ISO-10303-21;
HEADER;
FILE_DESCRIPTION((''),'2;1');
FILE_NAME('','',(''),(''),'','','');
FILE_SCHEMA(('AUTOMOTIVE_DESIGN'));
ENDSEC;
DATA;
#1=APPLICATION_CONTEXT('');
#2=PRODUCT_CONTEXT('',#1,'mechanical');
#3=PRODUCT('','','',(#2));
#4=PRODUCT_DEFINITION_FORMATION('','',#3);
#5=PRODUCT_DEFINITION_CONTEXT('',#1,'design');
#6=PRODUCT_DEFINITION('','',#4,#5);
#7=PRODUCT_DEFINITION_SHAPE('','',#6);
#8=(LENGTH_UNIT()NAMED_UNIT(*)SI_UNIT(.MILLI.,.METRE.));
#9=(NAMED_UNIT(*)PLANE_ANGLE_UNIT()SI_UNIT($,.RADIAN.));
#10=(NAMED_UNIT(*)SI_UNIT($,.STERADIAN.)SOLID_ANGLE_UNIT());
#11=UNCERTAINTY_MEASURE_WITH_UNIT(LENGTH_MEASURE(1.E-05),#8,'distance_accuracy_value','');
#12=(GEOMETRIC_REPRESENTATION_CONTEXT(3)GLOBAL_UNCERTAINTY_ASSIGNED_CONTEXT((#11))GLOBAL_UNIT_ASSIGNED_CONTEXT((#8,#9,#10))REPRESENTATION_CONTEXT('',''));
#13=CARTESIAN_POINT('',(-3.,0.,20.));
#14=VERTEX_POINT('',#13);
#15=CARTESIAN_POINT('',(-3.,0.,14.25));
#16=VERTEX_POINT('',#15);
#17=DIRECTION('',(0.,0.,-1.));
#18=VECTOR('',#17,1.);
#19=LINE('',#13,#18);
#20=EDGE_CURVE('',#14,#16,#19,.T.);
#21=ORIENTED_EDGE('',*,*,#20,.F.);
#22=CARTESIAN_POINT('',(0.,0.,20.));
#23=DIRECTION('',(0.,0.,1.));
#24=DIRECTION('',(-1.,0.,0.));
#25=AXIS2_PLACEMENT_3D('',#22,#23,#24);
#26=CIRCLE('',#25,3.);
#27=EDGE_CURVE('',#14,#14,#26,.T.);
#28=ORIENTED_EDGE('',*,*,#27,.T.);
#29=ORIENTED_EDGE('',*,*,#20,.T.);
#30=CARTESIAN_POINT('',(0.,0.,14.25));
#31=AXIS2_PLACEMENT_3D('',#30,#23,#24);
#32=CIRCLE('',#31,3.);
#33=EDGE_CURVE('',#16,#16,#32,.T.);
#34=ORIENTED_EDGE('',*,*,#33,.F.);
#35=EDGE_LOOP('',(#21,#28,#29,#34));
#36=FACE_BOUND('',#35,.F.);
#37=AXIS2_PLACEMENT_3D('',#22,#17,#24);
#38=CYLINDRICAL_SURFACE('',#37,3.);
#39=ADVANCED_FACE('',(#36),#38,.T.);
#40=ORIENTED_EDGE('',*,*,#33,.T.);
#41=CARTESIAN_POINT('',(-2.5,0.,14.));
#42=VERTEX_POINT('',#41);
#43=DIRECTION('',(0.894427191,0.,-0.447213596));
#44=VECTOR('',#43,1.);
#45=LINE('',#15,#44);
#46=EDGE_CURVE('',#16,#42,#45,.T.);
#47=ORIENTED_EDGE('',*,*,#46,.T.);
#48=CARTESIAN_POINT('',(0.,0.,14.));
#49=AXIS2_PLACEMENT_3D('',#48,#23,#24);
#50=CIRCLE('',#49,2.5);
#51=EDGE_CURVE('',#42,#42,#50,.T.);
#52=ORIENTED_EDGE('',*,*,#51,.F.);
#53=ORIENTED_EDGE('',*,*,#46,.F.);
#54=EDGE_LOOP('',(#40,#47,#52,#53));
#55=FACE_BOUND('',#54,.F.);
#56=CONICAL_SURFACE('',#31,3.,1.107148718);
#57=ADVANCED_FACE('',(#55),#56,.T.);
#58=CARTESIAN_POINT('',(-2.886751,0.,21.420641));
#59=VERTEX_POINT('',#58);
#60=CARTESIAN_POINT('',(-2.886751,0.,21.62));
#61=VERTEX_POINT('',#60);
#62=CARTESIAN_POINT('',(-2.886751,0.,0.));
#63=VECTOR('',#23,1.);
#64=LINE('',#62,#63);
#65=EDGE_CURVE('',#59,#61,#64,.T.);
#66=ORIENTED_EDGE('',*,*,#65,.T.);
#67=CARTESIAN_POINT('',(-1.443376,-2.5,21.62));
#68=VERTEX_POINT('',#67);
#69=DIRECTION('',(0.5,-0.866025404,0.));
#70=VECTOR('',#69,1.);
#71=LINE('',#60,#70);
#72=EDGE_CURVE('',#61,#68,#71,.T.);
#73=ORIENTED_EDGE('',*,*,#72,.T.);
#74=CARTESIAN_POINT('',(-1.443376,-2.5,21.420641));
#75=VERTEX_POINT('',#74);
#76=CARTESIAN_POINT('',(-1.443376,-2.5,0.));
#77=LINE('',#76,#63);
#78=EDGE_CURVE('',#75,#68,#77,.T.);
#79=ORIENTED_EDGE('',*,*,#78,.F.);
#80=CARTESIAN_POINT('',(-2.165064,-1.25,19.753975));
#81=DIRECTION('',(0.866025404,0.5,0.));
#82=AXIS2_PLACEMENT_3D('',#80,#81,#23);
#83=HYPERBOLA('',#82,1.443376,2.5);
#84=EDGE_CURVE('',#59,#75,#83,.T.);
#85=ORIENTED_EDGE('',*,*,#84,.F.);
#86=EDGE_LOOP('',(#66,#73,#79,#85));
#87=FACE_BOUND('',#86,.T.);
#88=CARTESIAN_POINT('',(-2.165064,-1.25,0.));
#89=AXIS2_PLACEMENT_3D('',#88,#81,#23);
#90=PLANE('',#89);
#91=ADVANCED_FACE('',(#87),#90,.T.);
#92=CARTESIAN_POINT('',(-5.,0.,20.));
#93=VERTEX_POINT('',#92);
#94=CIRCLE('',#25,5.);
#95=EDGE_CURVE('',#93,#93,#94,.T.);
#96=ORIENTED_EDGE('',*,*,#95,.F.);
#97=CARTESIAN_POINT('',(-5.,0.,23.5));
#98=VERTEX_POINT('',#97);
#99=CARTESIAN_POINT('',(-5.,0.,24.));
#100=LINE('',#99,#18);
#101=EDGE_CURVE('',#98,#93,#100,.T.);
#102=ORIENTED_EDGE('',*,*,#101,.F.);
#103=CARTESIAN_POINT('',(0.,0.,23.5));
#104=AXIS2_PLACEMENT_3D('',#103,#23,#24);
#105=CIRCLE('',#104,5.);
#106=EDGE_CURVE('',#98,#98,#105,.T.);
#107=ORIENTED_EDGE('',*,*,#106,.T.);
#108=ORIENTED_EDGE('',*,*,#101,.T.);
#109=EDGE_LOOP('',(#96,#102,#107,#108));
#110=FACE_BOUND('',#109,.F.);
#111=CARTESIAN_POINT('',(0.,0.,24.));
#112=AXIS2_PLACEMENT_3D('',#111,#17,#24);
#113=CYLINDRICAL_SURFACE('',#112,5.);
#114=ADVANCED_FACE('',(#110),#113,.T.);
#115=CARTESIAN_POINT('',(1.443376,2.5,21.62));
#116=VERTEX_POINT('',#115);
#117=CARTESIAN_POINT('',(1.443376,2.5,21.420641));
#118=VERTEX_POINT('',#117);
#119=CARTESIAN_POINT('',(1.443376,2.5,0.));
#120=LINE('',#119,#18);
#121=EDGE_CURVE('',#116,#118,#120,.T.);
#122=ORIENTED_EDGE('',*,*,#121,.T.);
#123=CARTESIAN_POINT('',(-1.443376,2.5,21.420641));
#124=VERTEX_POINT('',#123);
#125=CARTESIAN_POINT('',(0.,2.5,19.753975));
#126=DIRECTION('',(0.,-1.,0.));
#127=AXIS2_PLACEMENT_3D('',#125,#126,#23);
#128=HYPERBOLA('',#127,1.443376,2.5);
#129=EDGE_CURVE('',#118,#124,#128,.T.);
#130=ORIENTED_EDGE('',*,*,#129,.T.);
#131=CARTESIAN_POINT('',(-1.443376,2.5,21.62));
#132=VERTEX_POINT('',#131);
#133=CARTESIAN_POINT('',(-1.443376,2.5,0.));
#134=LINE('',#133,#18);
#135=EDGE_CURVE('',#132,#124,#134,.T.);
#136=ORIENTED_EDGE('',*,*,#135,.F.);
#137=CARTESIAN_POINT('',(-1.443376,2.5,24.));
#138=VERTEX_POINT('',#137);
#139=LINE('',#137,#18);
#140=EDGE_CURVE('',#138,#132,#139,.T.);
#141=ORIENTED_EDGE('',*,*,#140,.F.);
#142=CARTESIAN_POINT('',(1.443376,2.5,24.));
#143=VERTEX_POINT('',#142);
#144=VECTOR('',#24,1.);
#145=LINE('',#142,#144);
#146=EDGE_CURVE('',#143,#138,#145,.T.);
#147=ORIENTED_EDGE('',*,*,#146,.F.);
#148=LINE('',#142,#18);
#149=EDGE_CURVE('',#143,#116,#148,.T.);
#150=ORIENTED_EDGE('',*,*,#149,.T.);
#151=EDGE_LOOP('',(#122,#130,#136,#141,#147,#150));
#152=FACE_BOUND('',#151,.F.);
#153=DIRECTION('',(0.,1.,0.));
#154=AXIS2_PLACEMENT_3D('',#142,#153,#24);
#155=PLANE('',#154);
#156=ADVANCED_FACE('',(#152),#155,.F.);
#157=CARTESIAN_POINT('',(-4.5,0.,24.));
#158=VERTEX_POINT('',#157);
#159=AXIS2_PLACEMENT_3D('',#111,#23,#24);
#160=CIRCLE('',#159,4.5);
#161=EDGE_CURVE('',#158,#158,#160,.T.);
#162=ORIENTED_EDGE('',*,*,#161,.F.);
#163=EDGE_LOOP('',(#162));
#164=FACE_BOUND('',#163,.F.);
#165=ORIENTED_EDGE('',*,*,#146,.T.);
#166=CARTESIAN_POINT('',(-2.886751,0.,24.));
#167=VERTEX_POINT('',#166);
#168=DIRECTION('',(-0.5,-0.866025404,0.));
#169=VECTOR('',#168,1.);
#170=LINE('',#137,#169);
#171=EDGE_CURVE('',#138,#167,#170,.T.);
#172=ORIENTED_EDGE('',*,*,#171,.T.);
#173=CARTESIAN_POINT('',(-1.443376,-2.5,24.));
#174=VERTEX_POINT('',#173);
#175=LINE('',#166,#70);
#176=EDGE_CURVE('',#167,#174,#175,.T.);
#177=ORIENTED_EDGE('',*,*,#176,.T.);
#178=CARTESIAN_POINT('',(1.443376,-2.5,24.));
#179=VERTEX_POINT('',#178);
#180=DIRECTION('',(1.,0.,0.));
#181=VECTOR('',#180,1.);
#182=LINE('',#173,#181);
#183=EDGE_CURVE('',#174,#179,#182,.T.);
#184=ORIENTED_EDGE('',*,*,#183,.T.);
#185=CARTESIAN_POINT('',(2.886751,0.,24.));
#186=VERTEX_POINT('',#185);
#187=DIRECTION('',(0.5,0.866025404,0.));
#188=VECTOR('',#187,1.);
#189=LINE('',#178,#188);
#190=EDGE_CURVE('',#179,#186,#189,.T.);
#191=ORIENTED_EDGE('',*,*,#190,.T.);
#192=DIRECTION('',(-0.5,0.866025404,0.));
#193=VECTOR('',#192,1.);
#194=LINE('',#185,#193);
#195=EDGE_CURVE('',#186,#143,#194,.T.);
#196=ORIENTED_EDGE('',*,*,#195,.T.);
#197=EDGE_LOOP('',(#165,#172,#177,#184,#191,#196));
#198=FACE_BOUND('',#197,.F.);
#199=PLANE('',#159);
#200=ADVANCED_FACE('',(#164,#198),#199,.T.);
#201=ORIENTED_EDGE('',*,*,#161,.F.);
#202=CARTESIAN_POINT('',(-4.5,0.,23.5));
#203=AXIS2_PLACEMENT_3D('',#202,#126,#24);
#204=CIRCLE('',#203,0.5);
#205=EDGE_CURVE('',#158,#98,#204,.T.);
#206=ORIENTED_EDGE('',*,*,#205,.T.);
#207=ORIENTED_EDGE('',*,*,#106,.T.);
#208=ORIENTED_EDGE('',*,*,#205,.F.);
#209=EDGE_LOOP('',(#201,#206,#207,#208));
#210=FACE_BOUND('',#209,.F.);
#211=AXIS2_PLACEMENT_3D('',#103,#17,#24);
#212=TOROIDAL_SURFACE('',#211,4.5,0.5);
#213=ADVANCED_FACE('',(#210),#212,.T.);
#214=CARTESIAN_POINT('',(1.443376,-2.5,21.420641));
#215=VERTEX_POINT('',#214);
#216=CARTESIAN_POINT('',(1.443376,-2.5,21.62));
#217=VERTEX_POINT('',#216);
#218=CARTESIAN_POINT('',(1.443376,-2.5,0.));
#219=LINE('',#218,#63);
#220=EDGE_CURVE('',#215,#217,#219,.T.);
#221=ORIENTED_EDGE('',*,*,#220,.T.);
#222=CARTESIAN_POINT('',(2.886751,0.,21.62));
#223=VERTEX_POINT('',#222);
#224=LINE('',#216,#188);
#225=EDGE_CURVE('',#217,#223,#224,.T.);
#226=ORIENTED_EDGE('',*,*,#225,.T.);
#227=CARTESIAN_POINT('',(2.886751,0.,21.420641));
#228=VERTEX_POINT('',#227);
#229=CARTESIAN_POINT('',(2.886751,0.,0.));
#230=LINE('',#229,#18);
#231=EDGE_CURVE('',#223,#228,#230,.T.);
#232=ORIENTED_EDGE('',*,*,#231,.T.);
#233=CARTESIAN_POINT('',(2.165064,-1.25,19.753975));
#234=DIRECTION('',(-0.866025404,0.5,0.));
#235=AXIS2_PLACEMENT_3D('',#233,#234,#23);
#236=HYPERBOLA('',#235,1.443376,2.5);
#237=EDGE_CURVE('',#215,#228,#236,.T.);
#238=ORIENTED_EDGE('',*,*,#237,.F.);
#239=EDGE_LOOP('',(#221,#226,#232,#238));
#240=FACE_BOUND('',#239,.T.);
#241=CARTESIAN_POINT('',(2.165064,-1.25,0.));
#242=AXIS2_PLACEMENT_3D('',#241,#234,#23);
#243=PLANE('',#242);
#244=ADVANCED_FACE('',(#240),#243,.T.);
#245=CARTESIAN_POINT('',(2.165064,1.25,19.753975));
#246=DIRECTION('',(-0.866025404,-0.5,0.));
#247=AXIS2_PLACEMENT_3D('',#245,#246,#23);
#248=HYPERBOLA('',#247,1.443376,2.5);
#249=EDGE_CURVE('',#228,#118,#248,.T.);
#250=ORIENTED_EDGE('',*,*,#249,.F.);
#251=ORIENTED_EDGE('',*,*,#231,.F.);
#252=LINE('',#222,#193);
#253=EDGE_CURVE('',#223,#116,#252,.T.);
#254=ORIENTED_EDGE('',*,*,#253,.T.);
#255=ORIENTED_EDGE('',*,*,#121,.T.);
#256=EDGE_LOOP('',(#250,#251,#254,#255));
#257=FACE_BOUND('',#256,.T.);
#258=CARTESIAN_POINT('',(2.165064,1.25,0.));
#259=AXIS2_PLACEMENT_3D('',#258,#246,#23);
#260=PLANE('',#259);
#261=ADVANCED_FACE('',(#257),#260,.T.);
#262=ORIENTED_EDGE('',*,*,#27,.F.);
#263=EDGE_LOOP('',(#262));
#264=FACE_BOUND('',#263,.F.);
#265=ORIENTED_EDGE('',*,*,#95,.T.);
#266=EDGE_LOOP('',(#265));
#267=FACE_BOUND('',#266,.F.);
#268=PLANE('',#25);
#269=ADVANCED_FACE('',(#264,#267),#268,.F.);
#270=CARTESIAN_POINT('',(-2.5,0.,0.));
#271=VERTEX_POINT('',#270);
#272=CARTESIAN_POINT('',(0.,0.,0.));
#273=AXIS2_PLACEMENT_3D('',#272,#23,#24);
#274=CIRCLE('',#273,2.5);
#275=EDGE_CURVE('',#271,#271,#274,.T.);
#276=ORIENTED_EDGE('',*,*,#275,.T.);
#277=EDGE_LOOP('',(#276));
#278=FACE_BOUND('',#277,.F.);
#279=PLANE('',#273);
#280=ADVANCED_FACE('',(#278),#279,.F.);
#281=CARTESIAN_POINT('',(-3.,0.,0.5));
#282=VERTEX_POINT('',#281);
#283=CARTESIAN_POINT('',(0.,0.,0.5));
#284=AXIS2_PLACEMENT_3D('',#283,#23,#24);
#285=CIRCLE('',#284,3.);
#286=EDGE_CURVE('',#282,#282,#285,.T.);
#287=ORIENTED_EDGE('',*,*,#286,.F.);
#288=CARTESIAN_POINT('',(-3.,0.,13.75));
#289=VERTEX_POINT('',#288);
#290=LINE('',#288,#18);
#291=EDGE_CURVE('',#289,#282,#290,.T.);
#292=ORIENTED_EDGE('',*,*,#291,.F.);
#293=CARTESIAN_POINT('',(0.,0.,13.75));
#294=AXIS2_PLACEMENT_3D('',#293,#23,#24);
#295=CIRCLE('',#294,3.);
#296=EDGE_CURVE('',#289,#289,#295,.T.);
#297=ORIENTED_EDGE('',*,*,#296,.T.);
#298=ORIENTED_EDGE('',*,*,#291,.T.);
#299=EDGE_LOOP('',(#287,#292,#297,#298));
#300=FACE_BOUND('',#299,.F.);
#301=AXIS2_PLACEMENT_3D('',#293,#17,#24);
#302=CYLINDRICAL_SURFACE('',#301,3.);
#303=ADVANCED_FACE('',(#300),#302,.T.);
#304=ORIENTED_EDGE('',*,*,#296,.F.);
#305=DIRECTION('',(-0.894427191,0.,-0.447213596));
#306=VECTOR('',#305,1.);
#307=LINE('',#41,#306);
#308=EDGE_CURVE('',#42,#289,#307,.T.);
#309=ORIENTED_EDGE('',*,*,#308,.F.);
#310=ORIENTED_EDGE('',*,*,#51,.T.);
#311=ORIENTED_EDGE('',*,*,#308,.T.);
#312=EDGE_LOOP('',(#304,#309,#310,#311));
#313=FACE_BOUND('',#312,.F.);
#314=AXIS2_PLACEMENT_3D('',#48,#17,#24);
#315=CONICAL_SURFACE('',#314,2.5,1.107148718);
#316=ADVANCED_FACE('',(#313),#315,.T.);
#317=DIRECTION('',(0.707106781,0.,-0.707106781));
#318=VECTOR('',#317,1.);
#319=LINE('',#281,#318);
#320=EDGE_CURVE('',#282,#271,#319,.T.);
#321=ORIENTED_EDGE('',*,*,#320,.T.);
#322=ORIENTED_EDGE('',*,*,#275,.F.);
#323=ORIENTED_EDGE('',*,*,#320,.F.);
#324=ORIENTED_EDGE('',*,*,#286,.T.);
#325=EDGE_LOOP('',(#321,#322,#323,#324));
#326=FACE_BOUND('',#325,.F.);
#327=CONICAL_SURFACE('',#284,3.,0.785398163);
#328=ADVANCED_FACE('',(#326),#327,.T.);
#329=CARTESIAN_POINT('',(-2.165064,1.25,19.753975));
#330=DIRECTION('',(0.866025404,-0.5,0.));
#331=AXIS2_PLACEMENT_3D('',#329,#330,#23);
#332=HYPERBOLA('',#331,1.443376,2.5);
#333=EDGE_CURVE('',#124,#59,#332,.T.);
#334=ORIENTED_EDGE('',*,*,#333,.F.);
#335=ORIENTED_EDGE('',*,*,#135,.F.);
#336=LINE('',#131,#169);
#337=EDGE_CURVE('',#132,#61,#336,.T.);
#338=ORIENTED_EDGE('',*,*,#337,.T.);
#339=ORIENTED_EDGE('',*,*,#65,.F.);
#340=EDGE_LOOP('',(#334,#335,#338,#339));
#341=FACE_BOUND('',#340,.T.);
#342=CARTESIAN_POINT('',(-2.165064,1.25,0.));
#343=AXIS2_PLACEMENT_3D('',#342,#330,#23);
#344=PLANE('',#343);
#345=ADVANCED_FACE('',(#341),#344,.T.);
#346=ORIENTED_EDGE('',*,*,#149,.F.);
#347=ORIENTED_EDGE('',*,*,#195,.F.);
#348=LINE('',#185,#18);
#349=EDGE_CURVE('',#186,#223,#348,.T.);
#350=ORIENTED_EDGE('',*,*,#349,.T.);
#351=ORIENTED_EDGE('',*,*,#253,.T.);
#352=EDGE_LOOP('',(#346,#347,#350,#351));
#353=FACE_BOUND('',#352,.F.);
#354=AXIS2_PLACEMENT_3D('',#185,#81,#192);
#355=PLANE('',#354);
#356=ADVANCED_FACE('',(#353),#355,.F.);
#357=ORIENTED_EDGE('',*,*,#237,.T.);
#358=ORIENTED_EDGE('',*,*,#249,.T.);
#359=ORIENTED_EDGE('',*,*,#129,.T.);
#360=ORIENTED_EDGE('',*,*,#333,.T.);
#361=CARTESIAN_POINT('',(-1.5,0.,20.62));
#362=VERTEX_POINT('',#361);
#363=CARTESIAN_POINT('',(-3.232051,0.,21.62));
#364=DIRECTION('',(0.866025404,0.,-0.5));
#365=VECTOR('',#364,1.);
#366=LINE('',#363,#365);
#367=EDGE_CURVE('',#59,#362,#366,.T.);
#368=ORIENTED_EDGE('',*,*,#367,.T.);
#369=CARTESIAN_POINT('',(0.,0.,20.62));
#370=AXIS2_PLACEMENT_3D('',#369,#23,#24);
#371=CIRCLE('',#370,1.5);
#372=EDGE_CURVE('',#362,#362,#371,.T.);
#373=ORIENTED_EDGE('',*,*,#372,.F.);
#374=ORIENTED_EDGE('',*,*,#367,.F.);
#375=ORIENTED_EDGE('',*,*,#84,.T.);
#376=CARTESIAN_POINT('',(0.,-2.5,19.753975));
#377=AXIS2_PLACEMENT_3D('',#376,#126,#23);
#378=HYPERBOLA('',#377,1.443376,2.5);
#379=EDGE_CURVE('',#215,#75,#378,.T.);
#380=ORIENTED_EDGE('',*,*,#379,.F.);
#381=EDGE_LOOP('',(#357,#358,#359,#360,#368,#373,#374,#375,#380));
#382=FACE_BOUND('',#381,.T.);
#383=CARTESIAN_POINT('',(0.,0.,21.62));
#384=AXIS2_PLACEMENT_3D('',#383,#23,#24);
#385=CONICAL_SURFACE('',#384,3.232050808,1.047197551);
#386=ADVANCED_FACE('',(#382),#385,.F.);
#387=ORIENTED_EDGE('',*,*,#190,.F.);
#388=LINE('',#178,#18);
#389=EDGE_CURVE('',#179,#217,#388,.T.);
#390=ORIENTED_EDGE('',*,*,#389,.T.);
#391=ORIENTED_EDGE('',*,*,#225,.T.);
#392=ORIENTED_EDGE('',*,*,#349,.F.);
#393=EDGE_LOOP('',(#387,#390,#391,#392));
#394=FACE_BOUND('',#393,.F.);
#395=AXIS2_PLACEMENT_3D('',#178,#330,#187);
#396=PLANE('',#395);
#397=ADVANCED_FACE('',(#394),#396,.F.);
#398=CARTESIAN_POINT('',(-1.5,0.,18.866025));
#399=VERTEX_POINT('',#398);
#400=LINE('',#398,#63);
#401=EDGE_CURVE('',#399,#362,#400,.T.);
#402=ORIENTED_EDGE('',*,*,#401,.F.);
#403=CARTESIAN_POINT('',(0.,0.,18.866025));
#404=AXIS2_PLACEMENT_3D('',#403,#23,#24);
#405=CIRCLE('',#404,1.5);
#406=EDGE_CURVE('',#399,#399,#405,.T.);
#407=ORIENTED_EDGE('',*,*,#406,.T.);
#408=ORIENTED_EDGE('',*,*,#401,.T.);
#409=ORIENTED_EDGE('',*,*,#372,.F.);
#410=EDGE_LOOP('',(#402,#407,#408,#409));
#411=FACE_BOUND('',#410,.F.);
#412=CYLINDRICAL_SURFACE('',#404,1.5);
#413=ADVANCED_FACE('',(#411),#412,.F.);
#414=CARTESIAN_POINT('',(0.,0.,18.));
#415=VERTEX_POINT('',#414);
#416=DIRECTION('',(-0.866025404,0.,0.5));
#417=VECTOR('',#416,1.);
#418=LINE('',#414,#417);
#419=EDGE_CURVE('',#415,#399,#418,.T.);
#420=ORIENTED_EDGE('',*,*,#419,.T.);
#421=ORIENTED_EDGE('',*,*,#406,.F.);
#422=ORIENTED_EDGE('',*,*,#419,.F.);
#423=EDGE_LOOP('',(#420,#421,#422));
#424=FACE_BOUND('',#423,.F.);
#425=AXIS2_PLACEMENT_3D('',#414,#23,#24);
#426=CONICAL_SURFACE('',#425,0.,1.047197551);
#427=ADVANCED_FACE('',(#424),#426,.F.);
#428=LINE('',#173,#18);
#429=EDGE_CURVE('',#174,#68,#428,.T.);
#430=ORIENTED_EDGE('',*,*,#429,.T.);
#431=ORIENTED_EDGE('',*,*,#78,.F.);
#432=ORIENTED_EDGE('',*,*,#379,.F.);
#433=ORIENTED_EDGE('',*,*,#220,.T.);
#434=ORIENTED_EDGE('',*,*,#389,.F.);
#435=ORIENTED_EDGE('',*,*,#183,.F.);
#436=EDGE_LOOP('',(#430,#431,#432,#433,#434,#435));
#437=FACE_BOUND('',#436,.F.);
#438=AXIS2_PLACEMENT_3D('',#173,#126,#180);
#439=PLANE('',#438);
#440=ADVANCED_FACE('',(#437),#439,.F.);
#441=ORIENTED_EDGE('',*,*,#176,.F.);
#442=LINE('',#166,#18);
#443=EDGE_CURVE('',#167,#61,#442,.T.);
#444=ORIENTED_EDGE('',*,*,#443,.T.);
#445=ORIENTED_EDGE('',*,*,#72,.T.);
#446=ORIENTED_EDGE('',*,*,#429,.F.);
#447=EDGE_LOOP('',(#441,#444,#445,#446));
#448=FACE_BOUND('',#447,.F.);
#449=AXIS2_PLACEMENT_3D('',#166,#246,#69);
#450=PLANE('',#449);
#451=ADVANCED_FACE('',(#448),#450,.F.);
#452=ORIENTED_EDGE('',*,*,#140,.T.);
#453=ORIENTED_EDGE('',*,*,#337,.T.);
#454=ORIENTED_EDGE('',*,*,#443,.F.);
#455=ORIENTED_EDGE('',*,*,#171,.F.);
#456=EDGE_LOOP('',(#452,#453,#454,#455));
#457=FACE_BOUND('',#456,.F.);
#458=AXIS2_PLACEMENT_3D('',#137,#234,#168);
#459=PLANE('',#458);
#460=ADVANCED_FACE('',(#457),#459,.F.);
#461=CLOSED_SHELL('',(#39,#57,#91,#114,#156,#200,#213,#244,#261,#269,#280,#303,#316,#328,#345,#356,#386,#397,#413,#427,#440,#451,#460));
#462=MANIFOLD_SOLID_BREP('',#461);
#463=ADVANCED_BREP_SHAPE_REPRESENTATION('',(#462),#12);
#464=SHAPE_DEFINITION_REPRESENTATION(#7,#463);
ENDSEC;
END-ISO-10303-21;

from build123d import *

# Parameters (mm, degrees)
F2_R     = 0.5
F3_SIZE  = 0.5
F5_DEPTH = 2.38


# Not quite as in the source:
# - a fillet or chamfer that OpenCascade refuses, or shapes differently, is made with other operations: its cross-section is extruded or revolved along the edge and cut away or added


with BuildPart() as f1:
    # F0 (on Front) → F1 (revolve)
    with BuildSketch(Plane.XZ):
        Polygon((-3, 0), (0, 0), (0, 18), (-1.5, 18.8660254038), (-1.5, 24), (-5, 24), (-5, 20), (-3, 20), (-3, 14.25), (-2.5, 14), (-3, 13.75), align=None)
    revolve(axis=Axis((0, 0, 18.332445994), (0, 0, 1)))

    # F2
    f2_edges = [f1.edges().sort_by_distance(p)[0] for p in [
        (5, 0, 24),
    ]]
    fillet(f2_edges, radius=F2_R)

    # F3
    f3_edges = [f1.edges().sort_by_distance(p)[0] for p in [
        (3, 0, 0),
    ]]
    chamfer(f3_edges, length=F3_SIZE)

    # F4 (on face) → F5 (cut)
    with BuildSketch(Plane.XY.offset(24)):
        Polygon((-1.443375673, -2.5), (1.443375673, -2.5), (2.8867513459, 0), (1.443375673, 2.5), (-1.443375673, 2.5), (-2.8867513459, 0), align=None)
    extrude(amount=-F5_DEPTH, mode=Mode.SUBTRACT)

    # F6: chamfer of 1 x 1.7320508076 on 1 edges, made by hand


with BuildPart() as f6_tool2:
    # F6_s3 → F6_t4 (revolve)
    with BuildSketch(Plane.XZ):
        Polygon((-3.2320508076, 21.62), (-1.5, 20.62), (-1.5, 21.62), align=None)
    revolve(axis=Axis((0, 0, 21.62), (0, 0, 1)))

    split(bisect_by=Plane(origin=(-2.1650635095, 1.25, 0), x_dir=(0, 0, 1), z_dir=(0.8660254038, -0.5, 0)), keep=Keep.TOP)

    split(bisect_by=Plane.XZ.offset(-2.5), keep=Keep.TOP)

    split(bisect_by=Plane(origin=(2.1650635095, 1.25, 0), x_dir=(0, 0, 1), z_dir=(-0.8660254038, -0.5, 0)), keep=Keep.TOP)

    split(bisect_by=Plane(origin=(2.1650635095, -1.25, 0), x_dir=(0, 0, 1), z_dir=(-0.8660254038, 0.5, 0)), keep=Keep.TOP)

    split(bisect_by=Plane.XZ.offset(2.5), keep=Keep.BOTTOM)

    split(bisect_by=Plane(origin=(-2.1650635095, -1.25, 0), x_dir=(0, 0, 1), z_dir=(0.8660254038, 0.5, 0)), keep=Keep.TOP)


with BuildPart() as f1_1:
    add(f1.part)

    # F6_t1: cut F6_tool2
    add(f6_tool2.part, mode=Mode.SUBTRACT)


solid = f1_1.part
